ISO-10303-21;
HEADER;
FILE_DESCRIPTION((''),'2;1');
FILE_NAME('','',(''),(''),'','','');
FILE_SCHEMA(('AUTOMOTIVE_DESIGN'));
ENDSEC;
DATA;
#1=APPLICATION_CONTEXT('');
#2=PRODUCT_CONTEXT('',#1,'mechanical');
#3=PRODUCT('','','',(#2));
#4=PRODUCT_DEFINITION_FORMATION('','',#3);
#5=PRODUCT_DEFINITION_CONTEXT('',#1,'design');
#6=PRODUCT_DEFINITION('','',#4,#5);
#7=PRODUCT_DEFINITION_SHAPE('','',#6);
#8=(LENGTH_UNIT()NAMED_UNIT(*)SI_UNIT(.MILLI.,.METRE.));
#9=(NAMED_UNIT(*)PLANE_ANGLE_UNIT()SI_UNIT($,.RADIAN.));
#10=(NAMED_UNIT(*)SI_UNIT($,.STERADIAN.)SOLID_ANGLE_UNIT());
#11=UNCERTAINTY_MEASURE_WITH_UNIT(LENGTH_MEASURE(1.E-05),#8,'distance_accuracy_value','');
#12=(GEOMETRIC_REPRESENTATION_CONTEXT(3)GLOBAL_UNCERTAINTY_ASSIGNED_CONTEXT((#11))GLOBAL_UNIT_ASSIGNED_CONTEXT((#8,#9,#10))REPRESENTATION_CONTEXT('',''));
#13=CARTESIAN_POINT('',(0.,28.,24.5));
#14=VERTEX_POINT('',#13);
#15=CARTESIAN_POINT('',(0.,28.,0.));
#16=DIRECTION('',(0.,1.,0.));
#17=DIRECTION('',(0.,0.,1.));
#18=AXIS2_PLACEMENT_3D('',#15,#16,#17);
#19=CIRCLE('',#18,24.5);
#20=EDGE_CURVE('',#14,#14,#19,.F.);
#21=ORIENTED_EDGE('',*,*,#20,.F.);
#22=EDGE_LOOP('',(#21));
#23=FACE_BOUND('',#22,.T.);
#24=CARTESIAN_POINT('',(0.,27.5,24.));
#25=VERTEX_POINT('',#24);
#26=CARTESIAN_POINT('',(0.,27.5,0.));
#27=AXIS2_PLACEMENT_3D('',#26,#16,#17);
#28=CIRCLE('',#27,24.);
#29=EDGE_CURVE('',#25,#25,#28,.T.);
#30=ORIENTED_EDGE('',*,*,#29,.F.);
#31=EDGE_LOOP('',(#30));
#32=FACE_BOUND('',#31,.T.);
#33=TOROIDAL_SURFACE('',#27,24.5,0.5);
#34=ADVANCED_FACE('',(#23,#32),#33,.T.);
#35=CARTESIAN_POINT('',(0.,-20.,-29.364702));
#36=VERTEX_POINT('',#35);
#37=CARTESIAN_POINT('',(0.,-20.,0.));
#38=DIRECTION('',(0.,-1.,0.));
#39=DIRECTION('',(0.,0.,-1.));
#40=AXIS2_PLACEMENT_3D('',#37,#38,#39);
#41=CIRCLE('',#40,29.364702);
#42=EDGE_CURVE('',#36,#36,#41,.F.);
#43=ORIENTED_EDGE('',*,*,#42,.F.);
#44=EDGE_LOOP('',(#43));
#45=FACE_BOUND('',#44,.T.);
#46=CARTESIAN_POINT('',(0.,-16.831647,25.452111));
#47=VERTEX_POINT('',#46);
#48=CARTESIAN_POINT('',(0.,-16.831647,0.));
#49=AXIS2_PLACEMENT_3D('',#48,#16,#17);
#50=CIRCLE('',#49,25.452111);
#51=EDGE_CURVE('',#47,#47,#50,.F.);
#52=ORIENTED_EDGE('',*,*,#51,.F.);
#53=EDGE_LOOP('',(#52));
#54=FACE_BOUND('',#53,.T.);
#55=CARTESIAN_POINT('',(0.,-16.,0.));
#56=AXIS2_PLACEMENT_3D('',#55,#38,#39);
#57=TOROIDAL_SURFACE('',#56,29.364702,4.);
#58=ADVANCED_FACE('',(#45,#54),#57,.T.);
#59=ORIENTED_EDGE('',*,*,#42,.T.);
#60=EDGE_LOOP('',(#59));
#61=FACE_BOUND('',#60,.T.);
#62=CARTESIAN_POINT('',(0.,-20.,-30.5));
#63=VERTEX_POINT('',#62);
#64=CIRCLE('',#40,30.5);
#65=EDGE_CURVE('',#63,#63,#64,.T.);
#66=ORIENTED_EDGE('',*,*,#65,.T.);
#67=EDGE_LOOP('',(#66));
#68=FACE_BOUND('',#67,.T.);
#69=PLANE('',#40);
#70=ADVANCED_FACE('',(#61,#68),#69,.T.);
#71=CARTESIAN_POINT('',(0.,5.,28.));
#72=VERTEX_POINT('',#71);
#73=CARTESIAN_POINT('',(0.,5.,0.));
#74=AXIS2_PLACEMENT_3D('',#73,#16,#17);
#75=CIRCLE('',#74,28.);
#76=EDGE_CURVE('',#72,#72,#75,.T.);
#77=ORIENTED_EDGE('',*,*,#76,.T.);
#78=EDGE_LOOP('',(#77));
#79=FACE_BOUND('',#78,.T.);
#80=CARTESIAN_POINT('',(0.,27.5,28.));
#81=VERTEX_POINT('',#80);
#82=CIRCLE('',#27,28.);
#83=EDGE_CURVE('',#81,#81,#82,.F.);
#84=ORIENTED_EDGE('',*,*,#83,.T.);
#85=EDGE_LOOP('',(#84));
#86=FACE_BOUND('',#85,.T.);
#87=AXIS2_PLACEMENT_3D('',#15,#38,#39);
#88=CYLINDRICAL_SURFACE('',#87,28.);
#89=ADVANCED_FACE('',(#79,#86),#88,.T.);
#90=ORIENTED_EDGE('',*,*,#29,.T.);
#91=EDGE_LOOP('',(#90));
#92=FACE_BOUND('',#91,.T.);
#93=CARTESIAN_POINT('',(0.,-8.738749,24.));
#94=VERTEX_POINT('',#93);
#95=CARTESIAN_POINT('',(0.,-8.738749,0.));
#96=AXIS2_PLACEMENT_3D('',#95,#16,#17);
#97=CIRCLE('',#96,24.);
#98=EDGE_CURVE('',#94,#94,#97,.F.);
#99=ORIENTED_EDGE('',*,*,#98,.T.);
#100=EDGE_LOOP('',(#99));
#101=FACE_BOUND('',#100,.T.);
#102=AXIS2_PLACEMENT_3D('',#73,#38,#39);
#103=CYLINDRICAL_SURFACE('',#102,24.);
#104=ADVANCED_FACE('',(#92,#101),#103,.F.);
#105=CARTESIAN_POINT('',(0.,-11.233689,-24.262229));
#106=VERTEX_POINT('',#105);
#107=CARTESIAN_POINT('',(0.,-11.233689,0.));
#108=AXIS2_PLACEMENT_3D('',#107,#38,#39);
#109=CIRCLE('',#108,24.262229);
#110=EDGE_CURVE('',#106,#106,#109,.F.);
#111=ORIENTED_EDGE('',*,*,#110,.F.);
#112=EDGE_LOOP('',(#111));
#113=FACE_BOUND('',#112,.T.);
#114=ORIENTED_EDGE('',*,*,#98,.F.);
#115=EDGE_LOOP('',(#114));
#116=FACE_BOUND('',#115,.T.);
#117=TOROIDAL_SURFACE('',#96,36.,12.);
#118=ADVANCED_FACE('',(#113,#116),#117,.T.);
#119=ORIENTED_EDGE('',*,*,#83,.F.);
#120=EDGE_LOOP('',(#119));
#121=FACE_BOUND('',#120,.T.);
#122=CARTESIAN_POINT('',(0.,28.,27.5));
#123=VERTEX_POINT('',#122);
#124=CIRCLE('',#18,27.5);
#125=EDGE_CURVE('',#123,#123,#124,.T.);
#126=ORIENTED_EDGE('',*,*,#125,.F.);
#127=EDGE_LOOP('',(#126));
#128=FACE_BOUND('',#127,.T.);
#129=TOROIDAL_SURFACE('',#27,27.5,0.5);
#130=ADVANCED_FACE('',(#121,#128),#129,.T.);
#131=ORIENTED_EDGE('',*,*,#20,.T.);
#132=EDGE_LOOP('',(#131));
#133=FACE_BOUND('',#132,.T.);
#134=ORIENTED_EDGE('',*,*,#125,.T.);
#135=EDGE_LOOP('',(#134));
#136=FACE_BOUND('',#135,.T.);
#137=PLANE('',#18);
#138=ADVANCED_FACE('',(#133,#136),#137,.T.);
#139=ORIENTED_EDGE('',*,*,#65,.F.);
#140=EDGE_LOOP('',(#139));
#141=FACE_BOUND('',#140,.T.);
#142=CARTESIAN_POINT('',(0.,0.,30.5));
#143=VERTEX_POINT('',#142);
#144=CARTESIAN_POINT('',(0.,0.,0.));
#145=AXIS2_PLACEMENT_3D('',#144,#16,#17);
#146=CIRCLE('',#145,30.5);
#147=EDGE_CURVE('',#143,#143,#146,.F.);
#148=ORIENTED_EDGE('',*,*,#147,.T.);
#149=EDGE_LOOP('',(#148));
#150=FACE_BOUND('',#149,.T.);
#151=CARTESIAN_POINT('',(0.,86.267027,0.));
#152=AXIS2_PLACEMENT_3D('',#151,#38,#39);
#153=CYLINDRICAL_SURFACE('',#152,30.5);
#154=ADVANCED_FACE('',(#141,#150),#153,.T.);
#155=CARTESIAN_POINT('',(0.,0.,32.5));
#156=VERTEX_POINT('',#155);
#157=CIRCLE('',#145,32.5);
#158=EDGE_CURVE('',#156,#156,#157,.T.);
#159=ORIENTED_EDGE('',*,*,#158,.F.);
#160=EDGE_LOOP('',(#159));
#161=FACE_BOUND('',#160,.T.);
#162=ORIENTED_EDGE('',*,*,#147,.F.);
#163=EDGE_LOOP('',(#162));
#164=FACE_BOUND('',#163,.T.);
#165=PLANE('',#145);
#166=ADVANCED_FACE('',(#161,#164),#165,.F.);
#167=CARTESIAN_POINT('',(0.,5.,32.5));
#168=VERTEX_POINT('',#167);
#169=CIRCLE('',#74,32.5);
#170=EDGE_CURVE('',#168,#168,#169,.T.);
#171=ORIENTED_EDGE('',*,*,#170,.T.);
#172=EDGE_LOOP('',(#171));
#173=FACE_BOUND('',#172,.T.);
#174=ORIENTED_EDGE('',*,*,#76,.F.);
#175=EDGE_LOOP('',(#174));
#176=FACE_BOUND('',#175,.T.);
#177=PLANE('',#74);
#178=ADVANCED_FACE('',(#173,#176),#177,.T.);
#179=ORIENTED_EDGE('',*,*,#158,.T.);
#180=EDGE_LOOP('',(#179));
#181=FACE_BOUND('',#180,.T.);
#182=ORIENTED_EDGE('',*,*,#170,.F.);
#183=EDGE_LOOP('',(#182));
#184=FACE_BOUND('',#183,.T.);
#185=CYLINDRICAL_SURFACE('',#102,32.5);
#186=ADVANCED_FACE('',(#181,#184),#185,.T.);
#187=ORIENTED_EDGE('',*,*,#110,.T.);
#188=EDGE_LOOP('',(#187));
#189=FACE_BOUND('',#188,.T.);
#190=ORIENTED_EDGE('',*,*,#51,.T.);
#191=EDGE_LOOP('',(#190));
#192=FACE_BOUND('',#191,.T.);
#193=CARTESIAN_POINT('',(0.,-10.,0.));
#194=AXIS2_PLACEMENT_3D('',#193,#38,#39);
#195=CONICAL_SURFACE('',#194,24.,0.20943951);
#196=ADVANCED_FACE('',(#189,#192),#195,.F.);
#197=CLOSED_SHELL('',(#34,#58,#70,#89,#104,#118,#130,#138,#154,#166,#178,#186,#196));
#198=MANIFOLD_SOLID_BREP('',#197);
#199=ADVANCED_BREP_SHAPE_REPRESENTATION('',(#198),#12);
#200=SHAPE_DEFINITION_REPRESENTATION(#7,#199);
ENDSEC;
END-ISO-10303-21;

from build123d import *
from build123d.topology import SkipClean

# Parameters (mm, degrees)
SKETCH1_R                = 32.5
BOSS_EXTRUDE1_DEPTH      = 5
BOSS_EXTRUDE2_DEPTH      = 15
BOSS_EXTRUDE2_DEPTH_BACK = 5
BOSS_EXTRUDE2_START      = 5
SKETCH2_R                = 30.5
CUT_EXTRUDE3_START       = 10
SKETCH3_R                = 24
CUT_EXTRUDE3_DEPTH       = 41.124844139
CUT_EXTRUDE3_DRAFT       = -12
FILLET1_R                = 4
SKETCH4_R                = 24
CUT_EXTRUDE4_DEPTH       = 49.347699015
FILLET2_R                = 12
SKETCH5_R                = 28
SKETCH5_R_2              = 24
BOSS_EXTRUDE3_DEPTH      = 23
FILLET3_R                = 0.5


with BuildPart() as part:
    # Sketch1 → Boss-Extrude1 (new body)
    with BuildSketch(Plane(origin=(0, 0, 0), x_dir=(1, 0, 0), z_dir=(0, 1, 0))):
        with Locations(Location((0, 0, 0), (0, 0, 270))):
            Circle(SKETCH1_R)
    extrude(amount=BOSS_EXTRUDE1_DEPTH)

    # Sketch2 → Boss-Extrude2 (add, two sides: drawn at the far end of the back side and taken through both)
    with BuildSketch(Plane.XZ.offset(BOSS_EXTRUDE2_START - BOSS_EXTRUDE2_DEPTH_BACK)):
        with Locations(Location((0, 0, 0), (0, 0, 270))):
            Circle(SKETCH2_R)
    extrude(amount=BOSS_EXTRUDE2_DEPTH + BOSS_EXTRUDE2_DEPTH_BACK)


with BuildPart() as cut_extrude3_tool:
    # Sketch3 → Cut-Extrude3 (with draft: the straight prism first)
    with BuildSketch(Plane(origin=(0, 0, 0), x_dir=(-1, 0, 0), z_dir=(0, -1, 0)).offset(CUT_EXTRUDE3_START)):
        Circle(SKETCH3_R)
    extrude(amount=CUT_EXTRUDE3_DEPTH)
    # Cut-Extrude3: the draft: its side faces are tilted about the plane it starts from
    cut_extrude3_sides = [cut_extrude3_tool.faces().sort_by_distance(p)[0] for p in [
        (24, -30.56242207, 0),
    ]]
    draft(cut_extrude3_sides, Plane(origin=(0, 0, 0), x_dir=(-1, 0, 0), z_dir=(0, -1, 0)).offset(CUT_EXTRUDE3_START), CUT_EXTRUDE3_DRAFT)


with BuildPart() as part_1:
    add(part.part)

    # Cut-Extrude3: cut by cut_extrude3_tool
    add(cut_extrude3_tool.part, mode=Mode.SUBTRACT)

    # Fillet1
    fillet1_edges = [part_1.edges().sort_by_distance(p)[0] for p in [
        (26.125565617, -20, 0),
    ]]
    fillet(fillet1_edges, radius=FILLET1_R)

    # Sketch4 → Cut-Extrude4 (cut, through all)
    with BuildSketch(Plane.XZ.offset(10)):
        with Locations(Location((0, 0, 0), (0, 0, 270))):
            Circle(SKETCH4_R)
    extrude(amount=-CUT_EXTRUDE4_DEPTH, mode=Mode.SUBTRACT)

    # Fillet2
    fillet2_edges = [part_1.edges().sort_by_distance(p)[0] for p in [
        (-16.970562748, -10, -16.970562748),
    ]]
    fillet(fillet2_edges, radius=FILLET2_R)

    # Sketch5 → Boss-Extrude3 (add)
    with SkipClean():  # the faces are left unmerged after this step: merging them gives an invalid solid
        with BuildSketch(Plane(origin=(0, 5, 0), x_dir=(1, 0, 0), z_dir=(0, 1, 0))):
            with Locations(Location((0, 0, 0), (0, 0, 270))):
                Circle(SKETCH5_R)
            with Locations(Location((0, 0, 0), (0, 0, 270))):
                Circle(SKETCH5_R_2, mode=Mode.SUBTRACT)
        extrude(amount=BOSS_EXTRUDE3_DEPTH)
    add(part_1.part.scale(1), mode=Mode.REPLACE)  # the faces are merged on a copy

    # Fillet3
    fillet3_edges = [part_1.edges().sort_by_distance(p)[0] for p in [
        (0, 28, -28),
        (0, 28, -24),
    ]]
    fillet(fillet3_edges, radius=FILLET3_R)


solid = part_1.part
